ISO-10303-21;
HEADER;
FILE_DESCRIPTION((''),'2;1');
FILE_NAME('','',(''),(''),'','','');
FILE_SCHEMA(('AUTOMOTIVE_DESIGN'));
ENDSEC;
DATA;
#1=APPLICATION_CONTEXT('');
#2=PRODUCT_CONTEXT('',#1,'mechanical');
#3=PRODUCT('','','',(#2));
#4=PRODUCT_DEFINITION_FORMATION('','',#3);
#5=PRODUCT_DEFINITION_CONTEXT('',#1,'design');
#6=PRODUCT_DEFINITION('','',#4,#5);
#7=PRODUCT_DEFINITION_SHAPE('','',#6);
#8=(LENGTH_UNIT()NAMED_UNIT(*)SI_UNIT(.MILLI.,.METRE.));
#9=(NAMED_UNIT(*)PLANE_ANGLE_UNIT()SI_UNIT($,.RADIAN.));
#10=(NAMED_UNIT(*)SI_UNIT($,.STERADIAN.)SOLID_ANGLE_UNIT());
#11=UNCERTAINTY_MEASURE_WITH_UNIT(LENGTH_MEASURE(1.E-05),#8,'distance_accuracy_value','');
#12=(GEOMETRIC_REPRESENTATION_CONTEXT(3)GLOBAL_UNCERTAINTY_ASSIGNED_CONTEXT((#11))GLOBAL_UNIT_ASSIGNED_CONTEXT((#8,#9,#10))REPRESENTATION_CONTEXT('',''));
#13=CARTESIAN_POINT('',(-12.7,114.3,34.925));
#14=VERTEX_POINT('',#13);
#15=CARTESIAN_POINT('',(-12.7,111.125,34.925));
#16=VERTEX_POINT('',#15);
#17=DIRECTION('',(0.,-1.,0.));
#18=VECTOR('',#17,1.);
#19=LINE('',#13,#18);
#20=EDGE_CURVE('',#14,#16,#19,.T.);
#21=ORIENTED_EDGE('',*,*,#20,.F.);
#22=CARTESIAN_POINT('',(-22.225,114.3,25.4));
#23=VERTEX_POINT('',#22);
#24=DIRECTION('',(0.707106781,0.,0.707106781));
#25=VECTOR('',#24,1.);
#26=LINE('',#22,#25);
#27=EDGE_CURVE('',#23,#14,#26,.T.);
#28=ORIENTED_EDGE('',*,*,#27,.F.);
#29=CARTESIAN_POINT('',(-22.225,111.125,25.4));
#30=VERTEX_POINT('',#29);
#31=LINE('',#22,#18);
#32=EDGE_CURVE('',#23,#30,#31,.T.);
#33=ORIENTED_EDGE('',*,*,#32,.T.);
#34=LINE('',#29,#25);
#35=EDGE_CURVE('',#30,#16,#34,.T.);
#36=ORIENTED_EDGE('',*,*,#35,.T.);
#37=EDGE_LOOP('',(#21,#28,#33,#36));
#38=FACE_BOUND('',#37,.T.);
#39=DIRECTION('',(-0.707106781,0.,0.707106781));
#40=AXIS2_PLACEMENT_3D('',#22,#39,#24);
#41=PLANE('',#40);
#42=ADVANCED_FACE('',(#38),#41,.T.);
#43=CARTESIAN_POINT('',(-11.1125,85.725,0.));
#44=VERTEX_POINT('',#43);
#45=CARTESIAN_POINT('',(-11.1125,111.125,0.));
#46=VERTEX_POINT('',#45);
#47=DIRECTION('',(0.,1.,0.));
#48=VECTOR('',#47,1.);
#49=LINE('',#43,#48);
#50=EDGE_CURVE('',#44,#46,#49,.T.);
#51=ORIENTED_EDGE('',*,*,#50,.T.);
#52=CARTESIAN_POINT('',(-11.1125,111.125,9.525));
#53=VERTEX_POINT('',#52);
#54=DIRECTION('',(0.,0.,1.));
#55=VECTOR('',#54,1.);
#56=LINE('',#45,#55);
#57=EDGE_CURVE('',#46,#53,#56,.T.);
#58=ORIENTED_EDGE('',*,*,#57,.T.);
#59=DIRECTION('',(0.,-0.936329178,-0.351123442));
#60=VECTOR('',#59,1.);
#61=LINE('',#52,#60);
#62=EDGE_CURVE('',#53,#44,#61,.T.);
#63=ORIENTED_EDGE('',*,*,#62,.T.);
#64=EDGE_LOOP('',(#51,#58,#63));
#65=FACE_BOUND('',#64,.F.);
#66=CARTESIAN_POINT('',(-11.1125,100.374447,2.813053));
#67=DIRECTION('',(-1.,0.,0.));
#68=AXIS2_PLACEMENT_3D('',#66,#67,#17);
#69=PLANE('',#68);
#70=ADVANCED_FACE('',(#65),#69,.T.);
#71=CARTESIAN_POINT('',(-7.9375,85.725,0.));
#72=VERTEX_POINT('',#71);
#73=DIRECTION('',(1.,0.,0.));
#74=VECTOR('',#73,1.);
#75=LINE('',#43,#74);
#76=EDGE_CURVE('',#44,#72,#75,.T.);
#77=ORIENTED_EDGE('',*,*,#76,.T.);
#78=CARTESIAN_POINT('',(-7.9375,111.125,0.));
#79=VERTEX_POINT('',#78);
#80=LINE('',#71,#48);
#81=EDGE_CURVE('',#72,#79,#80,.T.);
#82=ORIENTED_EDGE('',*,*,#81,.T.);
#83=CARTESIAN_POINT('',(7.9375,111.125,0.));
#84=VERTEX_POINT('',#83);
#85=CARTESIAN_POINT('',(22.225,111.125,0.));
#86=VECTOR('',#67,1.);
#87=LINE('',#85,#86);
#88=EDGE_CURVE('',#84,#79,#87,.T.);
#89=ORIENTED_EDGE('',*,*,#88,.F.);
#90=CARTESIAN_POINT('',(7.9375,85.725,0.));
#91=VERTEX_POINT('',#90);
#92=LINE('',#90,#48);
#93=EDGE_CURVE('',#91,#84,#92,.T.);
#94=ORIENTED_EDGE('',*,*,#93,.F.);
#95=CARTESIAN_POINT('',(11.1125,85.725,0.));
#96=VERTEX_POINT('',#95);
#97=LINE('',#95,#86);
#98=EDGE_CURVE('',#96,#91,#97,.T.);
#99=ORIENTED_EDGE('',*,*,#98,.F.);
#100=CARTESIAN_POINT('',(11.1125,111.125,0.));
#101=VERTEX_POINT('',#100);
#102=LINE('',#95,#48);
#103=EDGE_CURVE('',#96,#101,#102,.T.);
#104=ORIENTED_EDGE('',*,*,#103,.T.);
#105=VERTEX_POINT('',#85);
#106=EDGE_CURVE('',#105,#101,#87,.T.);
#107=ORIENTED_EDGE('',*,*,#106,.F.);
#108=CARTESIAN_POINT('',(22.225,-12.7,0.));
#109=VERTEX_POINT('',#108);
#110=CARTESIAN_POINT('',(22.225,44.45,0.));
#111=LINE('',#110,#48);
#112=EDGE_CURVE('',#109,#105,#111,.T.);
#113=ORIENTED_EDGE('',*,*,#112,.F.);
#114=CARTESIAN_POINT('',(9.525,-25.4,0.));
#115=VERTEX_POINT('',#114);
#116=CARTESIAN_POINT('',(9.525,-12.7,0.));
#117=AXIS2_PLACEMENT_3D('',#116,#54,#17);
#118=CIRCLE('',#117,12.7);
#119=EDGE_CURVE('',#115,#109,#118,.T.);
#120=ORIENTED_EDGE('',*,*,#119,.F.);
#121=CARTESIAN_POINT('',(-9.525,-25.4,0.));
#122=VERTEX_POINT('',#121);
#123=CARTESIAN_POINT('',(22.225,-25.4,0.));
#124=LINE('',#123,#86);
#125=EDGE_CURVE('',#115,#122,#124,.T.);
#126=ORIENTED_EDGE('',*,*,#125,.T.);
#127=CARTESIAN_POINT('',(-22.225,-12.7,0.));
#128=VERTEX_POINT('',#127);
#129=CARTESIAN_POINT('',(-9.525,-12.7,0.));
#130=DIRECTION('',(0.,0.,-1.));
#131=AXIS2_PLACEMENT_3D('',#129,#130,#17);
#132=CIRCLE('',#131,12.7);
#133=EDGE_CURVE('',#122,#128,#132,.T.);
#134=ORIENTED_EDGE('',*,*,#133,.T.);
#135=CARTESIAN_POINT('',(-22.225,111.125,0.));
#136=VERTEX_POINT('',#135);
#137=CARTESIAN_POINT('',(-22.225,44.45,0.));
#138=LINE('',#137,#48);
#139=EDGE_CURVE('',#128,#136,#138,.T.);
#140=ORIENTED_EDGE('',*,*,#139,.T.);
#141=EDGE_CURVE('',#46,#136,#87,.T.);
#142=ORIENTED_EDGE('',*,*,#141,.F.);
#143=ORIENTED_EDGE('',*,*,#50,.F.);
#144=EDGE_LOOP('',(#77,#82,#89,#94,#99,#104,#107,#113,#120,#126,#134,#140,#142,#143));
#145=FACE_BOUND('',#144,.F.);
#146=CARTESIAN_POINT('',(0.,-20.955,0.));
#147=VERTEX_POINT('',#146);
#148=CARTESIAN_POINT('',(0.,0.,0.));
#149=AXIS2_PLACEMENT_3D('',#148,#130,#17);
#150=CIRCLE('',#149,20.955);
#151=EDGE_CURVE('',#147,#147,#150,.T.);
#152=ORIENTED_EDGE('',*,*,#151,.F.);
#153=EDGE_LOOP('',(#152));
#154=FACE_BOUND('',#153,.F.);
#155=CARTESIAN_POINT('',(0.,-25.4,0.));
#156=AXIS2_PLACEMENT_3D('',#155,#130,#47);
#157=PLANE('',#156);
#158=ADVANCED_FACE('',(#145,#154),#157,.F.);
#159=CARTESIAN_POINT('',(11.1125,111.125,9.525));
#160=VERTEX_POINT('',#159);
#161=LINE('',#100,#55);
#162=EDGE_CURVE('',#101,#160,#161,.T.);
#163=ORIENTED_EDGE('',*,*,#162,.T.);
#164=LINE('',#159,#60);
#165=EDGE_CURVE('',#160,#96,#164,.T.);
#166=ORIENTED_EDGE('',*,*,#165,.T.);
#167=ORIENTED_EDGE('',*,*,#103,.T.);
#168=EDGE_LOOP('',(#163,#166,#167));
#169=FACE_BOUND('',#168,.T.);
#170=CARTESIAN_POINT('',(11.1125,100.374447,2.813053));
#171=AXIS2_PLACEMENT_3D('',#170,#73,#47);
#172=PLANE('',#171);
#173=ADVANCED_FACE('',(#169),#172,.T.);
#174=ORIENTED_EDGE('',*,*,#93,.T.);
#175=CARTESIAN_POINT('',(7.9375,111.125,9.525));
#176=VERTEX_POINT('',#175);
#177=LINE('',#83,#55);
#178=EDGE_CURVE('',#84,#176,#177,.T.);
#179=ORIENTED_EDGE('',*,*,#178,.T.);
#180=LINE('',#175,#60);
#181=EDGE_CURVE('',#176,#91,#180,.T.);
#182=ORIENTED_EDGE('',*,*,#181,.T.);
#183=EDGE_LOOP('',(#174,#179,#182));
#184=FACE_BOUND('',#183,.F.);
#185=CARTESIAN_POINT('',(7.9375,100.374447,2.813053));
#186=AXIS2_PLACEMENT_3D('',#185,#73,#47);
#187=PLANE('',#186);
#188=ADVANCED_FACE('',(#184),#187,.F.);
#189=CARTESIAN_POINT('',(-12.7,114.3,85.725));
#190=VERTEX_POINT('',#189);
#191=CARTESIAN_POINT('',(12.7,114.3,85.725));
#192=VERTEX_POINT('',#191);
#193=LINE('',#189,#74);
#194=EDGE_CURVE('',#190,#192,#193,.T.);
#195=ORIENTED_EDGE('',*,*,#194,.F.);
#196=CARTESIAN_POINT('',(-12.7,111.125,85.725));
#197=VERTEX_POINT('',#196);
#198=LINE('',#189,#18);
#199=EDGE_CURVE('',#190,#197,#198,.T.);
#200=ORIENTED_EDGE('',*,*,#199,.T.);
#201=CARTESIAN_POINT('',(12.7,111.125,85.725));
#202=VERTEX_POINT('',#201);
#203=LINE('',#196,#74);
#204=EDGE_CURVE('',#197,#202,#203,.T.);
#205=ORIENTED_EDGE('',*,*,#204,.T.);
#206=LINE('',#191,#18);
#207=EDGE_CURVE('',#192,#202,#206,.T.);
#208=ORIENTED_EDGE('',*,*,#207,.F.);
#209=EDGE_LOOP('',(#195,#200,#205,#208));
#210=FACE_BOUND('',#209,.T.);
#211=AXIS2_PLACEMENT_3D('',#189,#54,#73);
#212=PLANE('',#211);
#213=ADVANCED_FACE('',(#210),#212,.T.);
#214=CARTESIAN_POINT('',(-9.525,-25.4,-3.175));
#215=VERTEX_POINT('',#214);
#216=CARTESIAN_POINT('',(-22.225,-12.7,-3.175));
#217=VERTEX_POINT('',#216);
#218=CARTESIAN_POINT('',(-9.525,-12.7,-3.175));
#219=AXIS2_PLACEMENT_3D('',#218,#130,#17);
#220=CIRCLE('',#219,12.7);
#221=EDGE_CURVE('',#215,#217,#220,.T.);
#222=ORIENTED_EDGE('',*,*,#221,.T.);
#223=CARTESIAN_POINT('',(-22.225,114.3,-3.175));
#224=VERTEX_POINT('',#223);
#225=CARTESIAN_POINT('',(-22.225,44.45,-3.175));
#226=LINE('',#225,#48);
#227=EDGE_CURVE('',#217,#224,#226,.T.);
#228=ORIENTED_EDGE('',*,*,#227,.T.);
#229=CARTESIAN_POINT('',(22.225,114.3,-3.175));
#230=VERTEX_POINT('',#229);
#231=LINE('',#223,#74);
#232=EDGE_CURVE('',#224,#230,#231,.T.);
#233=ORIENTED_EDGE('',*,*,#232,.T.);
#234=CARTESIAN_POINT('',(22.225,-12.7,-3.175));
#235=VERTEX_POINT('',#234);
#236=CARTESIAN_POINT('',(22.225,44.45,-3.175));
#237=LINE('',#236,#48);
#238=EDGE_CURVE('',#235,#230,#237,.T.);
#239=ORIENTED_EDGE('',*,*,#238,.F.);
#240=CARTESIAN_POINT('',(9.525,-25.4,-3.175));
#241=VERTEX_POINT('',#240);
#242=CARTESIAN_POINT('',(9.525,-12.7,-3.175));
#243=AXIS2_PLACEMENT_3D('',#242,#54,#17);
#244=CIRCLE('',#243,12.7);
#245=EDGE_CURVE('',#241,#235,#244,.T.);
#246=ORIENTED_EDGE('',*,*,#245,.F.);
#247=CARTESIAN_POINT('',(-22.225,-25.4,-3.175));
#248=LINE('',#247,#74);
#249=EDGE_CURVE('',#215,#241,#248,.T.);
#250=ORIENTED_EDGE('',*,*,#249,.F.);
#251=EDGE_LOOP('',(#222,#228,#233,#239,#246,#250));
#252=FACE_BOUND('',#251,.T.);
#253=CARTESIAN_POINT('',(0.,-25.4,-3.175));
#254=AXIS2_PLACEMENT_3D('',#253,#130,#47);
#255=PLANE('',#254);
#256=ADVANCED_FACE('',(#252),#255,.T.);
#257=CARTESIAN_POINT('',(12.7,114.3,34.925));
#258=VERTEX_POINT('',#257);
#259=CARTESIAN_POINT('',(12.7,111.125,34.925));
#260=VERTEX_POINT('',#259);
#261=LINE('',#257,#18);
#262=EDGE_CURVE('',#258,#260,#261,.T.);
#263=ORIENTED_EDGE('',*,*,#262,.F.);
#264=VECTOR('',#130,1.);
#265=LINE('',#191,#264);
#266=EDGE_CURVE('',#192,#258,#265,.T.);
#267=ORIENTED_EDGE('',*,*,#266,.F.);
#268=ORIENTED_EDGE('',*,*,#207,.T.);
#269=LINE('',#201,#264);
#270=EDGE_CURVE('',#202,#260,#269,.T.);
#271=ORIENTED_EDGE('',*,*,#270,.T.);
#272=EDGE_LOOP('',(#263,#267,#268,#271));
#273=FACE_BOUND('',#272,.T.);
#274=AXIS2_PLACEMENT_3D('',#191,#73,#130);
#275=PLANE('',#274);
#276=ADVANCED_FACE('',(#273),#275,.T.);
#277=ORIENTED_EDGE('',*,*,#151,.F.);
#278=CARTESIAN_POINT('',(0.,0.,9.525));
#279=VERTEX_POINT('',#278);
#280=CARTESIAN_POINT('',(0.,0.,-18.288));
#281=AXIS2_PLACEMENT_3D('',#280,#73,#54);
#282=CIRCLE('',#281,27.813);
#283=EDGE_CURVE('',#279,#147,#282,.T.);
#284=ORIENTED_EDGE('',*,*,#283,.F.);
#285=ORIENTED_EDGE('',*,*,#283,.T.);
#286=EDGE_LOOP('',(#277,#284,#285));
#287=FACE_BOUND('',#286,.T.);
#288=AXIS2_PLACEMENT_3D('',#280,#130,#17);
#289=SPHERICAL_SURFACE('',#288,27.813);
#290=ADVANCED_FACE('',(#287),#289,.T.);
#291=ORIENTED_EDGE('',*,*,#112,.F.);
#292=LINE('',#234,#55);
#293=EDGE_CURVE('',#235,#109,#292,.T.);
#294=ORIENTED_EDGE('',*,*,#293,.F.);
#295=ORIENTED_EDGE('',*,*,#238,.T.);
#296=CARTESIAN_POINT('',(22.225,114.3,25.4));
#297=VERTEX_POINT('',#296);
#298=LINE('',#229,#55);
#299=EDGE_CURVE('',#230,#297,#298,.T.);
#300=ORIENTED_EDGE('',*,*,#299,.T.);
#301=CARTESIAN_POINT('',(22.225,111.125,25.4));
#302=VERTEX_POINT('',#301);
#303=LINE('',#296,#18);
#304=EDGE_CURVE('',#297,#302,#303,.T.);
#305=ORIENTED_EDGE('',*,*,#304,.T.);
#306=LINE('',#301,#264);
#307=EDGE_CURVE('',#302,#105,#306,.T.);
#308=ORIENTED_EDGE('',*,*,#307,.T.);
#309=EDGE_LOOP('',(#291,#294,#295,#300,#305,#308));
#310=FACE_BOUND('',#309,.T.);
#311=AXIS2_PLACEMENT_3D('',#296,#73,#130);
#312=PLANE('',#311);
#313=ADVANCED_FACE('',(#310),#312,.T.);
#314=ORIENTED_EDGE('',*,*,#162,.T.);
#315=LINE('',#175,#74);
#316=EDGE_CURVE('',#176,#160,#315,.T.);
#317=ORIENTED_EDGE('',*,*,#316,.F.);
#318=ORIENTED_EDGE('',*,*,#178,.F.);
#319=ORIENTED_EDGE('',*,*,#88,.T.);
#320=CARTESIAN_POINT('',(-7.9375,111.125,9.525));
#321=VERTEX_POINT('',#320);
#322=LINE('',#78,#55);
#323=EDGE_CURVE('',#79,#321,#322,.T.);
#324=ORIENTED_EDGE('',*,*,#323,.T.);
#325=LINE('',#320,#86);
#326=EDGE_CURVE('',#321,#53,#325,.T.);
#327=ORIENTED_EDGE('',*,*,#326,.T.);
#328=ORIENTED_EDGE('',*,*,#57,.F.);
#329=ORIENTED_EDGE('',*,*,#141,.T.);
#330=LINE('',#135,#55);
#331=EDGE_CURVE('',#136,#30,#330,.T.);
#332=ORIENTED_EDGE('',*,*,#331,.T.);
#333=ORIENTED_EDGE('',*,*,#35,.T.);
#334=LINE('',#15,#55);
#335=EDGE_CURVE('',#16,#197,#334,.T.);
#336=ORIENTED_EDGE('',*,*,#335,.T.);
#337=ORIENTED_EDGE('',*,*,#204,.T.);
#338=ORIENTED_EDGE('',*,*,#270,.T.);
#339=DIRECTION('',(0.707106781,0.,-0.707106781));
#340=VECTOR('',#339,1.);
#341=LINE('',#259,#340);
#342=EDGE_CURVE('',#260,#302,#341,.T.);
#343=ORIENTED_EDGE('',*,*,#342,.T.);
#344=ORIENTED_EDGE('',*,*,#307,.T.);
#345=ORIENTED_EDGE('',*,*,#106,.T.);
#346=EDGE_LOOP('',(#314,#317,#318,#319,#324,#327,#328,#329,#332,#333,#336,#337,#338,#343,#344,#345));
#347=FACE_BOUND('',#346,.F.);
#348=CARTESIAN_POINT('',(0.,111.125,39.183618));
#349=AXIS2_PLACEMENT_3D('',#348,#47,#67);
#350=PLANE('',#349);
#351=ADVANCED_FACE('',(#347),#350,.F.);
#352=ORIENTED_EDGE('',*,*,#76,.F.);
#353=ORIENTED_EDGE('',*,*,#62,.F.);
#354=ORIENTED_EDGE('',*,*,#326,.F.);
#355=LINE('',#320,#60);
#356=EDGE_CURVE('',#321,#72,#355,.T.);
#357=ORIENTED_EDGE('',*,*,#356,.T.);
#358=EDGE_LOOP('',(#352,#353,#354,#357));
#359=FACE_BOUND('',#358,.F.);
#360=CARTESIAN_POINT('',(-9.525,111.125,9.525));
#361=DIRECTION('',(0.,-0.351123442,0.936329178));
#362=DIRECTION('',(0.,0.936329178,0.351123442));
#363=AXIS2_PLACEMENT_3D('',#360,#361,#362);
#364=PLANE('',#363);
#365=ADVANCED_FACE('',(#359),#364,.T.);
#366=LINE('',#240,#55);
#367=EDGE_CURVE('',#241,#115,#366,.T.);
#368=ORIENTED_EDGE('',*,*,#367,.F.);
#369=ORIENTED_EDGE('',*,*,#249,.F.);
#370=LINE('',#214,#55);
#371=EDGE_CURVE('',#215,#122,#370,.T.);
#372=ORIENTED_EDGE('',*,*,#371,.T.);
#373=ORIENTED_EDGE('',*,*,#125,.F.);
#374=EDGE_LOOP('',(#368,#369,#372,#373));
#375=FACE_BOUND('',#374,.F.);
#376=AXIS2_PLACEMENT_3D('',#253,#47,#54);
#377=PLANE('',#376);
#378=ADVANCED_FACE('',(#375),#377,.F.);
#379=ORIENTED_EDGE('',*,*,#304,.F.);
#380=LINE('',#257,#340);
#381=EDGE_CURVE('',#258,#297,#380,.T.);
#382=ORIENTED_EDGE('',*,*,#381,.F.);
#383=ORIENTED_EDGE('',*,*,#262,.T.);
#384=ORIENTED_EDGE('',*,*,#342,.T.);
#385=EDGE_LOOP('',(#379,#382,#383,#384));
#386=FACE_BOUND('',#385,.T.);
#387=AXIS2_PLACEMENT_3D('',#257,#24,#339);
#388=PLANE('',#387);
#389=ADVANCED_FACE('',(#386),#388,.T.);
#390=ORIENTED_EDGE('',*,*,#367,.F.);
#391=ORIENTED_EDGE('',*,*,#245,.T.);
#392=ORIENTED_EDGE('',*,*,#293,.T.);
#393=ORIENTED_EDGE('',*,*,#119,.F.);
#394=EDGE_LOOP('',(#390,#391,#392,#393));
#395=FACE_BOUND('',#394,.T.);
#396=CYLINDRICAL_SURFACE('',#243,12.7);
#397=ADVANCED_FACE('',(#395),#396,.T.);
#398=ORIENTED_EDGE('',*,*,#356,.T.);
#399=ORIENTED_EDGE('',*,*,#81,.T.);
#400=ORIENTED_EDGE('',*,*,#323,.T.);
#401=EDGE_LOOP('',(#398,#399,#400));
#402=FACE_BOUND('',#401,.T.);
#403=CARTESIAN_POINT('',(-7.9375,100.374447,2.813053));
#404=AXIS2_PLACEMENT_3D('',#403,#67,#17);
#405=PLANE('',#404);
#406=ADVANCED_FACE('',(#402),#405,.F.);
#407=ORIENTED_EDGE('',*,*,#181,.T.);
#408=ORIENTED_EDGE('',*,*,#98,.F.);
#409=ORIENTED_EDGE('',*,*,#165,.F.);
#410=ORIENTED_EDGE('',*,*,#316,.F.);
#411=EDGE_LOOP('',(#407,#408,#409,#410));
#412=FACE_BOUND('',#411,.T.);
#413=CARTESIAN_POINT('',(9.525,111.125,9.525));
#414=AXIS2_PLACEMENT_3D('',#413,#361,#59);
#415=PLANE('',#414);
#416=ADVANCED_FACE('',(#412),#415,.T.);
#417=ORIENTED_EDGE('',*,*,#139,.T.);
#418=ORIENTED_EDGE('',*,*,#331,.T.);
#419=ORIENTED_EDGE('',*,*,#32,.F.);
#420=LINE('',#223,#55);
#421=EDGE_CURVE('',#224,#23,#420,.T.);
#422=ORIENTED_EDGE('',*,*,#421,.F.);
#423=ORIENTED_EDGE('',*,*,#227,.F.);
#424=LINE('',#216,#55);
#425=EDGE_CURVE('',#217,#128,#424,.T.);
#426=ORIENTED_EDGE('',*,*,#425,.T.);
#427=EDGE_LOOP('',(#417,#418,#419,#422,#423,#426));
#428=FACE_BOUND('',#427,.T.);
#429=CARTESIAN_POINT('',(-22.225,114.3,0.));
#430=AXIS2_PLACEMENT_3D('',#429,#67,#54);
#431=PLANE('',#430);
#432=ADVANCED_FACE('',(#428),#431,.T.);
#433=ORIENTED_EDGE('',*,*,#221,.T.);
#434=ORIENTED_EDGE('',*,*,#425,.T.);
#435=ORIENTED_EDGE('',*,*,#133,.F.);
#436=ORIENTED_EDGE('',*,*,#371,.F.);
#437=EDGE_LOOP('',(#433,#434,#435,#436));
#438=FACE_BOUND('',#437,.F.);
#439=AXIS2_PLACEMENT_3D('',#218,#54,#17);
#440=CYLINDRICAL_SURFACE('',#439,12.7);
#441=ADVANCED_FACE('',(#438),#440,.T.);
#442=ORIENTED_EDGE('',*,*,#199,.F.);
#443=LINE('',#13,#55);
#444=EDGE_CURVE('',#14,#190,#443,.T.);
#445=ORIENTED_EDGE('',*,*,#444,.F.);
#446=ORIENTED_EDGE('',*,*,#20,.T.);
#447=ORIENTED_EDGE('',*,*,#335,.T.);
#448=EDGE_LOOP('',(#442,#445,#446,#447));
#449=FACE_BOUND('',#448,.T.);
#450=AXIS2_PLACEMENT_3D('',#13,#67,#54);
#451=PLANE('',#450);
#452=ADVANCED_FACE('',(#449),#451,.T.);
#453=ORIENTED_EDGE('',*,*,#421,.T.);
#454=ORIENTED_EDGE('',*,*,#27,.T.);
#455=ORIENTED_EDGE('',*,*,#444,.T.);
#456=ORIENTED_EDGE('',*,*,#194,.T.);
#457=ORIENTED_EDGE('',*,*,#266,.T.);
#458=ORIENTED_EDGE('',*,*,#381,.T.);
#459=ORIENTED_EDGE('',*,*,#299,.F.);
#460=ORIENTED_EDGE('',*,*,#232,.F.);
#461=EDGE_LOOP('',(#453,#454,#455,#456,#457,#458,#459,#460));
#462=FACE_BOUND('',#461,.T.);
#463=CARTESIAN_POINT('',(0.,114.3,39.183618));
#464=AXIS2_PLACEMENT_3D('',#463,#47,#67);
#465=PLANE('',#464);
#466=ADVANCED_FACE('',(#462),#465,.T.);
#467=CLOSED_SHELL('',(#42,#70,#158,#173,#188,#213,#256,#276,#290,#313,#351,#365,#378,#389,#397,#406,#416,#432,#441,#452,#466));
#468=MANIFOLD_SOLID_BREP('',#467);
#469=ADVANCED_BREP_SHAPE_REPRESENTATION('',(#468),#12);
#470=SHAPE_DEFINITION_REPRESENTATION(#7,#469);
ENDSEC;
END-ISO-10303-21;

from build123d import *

# Parameters (mm, degrees)
F0_W     = 139.7
F0_H     = 3.175
F1_DEPTH = 22.225
F4_R     = 12.7
F6_DEPTH = 3.175
F9_DEPTH = 1.5875


# Not quite as in the source:
# - a pattern or mirror of a feature is missing from the dataset's text; its kind, count and spacing are read off the source's solid


with BuildPart() as f1:
    # F0 (on Right) → F1 (new body, symmetric)
    with BuildSketch(Plane.YZ):
        with Locations((44.45, -1.5875)):
            Rectangle(F0_W, F0_H)
    extrude(amount=F1_DEPTH, both=True)

    # F2 (on Right) → F3 (revolve)
    with BuildSketch(Plane.YZ):
        with BuildLine():
            Line((0, 0), (0, 9.525))
            ThreePointArc((0, 9.525), (-11.5091012898, 7.0320228377), (-20.955, 0))
            Line((-20.955, 0), (0, 0))
        make_face()
    revolve(axis=Axis((0, 0, 4.7625), (0, 0, -1)))

    # F4
    f4_edges = [f1.edges().sort_by_distance(p)[0] for p in [
        (22.225, -25.4, -1.5875),
        (-22.225, -25.4, -1.5875),
    ]]
    fillet(f4_edges, radius=F4_R)

    # F5 (on face) → F6 (join)
    with BuildSketch(Plane(origin=(0, 114.3, 0), x_dir=(-1, 0, 0), z_dir=(0, 1, 0))):
        Polygon((-22.225, 25.4), (-22.225, 0), (22.225, 0), (22.225, 25.4), (12.7, 34.925), (12.7, 85.725), (-12.7, 85.725), (-12.7, 34.925), align=None)
    extrude(amount=-F6_DEPTH)

    # F8 (on offset) → F9 (join, symmetric)
    with BuildSketch(Plane.YZ.offset(9.525)):
        Polygon((111.125, 0), (111.125, 9.525), (85.725, 0), align=None)
    f9 = extrude(amount=F9_DEPTH, both=True)

    # F9_copies: F9 across plane
    add(f9.mirror(Plane(origin=(0, 0, 0), x_dir=(0, 0, -1), z_dir=(-1, 0, 0))))


solid = f1.part
